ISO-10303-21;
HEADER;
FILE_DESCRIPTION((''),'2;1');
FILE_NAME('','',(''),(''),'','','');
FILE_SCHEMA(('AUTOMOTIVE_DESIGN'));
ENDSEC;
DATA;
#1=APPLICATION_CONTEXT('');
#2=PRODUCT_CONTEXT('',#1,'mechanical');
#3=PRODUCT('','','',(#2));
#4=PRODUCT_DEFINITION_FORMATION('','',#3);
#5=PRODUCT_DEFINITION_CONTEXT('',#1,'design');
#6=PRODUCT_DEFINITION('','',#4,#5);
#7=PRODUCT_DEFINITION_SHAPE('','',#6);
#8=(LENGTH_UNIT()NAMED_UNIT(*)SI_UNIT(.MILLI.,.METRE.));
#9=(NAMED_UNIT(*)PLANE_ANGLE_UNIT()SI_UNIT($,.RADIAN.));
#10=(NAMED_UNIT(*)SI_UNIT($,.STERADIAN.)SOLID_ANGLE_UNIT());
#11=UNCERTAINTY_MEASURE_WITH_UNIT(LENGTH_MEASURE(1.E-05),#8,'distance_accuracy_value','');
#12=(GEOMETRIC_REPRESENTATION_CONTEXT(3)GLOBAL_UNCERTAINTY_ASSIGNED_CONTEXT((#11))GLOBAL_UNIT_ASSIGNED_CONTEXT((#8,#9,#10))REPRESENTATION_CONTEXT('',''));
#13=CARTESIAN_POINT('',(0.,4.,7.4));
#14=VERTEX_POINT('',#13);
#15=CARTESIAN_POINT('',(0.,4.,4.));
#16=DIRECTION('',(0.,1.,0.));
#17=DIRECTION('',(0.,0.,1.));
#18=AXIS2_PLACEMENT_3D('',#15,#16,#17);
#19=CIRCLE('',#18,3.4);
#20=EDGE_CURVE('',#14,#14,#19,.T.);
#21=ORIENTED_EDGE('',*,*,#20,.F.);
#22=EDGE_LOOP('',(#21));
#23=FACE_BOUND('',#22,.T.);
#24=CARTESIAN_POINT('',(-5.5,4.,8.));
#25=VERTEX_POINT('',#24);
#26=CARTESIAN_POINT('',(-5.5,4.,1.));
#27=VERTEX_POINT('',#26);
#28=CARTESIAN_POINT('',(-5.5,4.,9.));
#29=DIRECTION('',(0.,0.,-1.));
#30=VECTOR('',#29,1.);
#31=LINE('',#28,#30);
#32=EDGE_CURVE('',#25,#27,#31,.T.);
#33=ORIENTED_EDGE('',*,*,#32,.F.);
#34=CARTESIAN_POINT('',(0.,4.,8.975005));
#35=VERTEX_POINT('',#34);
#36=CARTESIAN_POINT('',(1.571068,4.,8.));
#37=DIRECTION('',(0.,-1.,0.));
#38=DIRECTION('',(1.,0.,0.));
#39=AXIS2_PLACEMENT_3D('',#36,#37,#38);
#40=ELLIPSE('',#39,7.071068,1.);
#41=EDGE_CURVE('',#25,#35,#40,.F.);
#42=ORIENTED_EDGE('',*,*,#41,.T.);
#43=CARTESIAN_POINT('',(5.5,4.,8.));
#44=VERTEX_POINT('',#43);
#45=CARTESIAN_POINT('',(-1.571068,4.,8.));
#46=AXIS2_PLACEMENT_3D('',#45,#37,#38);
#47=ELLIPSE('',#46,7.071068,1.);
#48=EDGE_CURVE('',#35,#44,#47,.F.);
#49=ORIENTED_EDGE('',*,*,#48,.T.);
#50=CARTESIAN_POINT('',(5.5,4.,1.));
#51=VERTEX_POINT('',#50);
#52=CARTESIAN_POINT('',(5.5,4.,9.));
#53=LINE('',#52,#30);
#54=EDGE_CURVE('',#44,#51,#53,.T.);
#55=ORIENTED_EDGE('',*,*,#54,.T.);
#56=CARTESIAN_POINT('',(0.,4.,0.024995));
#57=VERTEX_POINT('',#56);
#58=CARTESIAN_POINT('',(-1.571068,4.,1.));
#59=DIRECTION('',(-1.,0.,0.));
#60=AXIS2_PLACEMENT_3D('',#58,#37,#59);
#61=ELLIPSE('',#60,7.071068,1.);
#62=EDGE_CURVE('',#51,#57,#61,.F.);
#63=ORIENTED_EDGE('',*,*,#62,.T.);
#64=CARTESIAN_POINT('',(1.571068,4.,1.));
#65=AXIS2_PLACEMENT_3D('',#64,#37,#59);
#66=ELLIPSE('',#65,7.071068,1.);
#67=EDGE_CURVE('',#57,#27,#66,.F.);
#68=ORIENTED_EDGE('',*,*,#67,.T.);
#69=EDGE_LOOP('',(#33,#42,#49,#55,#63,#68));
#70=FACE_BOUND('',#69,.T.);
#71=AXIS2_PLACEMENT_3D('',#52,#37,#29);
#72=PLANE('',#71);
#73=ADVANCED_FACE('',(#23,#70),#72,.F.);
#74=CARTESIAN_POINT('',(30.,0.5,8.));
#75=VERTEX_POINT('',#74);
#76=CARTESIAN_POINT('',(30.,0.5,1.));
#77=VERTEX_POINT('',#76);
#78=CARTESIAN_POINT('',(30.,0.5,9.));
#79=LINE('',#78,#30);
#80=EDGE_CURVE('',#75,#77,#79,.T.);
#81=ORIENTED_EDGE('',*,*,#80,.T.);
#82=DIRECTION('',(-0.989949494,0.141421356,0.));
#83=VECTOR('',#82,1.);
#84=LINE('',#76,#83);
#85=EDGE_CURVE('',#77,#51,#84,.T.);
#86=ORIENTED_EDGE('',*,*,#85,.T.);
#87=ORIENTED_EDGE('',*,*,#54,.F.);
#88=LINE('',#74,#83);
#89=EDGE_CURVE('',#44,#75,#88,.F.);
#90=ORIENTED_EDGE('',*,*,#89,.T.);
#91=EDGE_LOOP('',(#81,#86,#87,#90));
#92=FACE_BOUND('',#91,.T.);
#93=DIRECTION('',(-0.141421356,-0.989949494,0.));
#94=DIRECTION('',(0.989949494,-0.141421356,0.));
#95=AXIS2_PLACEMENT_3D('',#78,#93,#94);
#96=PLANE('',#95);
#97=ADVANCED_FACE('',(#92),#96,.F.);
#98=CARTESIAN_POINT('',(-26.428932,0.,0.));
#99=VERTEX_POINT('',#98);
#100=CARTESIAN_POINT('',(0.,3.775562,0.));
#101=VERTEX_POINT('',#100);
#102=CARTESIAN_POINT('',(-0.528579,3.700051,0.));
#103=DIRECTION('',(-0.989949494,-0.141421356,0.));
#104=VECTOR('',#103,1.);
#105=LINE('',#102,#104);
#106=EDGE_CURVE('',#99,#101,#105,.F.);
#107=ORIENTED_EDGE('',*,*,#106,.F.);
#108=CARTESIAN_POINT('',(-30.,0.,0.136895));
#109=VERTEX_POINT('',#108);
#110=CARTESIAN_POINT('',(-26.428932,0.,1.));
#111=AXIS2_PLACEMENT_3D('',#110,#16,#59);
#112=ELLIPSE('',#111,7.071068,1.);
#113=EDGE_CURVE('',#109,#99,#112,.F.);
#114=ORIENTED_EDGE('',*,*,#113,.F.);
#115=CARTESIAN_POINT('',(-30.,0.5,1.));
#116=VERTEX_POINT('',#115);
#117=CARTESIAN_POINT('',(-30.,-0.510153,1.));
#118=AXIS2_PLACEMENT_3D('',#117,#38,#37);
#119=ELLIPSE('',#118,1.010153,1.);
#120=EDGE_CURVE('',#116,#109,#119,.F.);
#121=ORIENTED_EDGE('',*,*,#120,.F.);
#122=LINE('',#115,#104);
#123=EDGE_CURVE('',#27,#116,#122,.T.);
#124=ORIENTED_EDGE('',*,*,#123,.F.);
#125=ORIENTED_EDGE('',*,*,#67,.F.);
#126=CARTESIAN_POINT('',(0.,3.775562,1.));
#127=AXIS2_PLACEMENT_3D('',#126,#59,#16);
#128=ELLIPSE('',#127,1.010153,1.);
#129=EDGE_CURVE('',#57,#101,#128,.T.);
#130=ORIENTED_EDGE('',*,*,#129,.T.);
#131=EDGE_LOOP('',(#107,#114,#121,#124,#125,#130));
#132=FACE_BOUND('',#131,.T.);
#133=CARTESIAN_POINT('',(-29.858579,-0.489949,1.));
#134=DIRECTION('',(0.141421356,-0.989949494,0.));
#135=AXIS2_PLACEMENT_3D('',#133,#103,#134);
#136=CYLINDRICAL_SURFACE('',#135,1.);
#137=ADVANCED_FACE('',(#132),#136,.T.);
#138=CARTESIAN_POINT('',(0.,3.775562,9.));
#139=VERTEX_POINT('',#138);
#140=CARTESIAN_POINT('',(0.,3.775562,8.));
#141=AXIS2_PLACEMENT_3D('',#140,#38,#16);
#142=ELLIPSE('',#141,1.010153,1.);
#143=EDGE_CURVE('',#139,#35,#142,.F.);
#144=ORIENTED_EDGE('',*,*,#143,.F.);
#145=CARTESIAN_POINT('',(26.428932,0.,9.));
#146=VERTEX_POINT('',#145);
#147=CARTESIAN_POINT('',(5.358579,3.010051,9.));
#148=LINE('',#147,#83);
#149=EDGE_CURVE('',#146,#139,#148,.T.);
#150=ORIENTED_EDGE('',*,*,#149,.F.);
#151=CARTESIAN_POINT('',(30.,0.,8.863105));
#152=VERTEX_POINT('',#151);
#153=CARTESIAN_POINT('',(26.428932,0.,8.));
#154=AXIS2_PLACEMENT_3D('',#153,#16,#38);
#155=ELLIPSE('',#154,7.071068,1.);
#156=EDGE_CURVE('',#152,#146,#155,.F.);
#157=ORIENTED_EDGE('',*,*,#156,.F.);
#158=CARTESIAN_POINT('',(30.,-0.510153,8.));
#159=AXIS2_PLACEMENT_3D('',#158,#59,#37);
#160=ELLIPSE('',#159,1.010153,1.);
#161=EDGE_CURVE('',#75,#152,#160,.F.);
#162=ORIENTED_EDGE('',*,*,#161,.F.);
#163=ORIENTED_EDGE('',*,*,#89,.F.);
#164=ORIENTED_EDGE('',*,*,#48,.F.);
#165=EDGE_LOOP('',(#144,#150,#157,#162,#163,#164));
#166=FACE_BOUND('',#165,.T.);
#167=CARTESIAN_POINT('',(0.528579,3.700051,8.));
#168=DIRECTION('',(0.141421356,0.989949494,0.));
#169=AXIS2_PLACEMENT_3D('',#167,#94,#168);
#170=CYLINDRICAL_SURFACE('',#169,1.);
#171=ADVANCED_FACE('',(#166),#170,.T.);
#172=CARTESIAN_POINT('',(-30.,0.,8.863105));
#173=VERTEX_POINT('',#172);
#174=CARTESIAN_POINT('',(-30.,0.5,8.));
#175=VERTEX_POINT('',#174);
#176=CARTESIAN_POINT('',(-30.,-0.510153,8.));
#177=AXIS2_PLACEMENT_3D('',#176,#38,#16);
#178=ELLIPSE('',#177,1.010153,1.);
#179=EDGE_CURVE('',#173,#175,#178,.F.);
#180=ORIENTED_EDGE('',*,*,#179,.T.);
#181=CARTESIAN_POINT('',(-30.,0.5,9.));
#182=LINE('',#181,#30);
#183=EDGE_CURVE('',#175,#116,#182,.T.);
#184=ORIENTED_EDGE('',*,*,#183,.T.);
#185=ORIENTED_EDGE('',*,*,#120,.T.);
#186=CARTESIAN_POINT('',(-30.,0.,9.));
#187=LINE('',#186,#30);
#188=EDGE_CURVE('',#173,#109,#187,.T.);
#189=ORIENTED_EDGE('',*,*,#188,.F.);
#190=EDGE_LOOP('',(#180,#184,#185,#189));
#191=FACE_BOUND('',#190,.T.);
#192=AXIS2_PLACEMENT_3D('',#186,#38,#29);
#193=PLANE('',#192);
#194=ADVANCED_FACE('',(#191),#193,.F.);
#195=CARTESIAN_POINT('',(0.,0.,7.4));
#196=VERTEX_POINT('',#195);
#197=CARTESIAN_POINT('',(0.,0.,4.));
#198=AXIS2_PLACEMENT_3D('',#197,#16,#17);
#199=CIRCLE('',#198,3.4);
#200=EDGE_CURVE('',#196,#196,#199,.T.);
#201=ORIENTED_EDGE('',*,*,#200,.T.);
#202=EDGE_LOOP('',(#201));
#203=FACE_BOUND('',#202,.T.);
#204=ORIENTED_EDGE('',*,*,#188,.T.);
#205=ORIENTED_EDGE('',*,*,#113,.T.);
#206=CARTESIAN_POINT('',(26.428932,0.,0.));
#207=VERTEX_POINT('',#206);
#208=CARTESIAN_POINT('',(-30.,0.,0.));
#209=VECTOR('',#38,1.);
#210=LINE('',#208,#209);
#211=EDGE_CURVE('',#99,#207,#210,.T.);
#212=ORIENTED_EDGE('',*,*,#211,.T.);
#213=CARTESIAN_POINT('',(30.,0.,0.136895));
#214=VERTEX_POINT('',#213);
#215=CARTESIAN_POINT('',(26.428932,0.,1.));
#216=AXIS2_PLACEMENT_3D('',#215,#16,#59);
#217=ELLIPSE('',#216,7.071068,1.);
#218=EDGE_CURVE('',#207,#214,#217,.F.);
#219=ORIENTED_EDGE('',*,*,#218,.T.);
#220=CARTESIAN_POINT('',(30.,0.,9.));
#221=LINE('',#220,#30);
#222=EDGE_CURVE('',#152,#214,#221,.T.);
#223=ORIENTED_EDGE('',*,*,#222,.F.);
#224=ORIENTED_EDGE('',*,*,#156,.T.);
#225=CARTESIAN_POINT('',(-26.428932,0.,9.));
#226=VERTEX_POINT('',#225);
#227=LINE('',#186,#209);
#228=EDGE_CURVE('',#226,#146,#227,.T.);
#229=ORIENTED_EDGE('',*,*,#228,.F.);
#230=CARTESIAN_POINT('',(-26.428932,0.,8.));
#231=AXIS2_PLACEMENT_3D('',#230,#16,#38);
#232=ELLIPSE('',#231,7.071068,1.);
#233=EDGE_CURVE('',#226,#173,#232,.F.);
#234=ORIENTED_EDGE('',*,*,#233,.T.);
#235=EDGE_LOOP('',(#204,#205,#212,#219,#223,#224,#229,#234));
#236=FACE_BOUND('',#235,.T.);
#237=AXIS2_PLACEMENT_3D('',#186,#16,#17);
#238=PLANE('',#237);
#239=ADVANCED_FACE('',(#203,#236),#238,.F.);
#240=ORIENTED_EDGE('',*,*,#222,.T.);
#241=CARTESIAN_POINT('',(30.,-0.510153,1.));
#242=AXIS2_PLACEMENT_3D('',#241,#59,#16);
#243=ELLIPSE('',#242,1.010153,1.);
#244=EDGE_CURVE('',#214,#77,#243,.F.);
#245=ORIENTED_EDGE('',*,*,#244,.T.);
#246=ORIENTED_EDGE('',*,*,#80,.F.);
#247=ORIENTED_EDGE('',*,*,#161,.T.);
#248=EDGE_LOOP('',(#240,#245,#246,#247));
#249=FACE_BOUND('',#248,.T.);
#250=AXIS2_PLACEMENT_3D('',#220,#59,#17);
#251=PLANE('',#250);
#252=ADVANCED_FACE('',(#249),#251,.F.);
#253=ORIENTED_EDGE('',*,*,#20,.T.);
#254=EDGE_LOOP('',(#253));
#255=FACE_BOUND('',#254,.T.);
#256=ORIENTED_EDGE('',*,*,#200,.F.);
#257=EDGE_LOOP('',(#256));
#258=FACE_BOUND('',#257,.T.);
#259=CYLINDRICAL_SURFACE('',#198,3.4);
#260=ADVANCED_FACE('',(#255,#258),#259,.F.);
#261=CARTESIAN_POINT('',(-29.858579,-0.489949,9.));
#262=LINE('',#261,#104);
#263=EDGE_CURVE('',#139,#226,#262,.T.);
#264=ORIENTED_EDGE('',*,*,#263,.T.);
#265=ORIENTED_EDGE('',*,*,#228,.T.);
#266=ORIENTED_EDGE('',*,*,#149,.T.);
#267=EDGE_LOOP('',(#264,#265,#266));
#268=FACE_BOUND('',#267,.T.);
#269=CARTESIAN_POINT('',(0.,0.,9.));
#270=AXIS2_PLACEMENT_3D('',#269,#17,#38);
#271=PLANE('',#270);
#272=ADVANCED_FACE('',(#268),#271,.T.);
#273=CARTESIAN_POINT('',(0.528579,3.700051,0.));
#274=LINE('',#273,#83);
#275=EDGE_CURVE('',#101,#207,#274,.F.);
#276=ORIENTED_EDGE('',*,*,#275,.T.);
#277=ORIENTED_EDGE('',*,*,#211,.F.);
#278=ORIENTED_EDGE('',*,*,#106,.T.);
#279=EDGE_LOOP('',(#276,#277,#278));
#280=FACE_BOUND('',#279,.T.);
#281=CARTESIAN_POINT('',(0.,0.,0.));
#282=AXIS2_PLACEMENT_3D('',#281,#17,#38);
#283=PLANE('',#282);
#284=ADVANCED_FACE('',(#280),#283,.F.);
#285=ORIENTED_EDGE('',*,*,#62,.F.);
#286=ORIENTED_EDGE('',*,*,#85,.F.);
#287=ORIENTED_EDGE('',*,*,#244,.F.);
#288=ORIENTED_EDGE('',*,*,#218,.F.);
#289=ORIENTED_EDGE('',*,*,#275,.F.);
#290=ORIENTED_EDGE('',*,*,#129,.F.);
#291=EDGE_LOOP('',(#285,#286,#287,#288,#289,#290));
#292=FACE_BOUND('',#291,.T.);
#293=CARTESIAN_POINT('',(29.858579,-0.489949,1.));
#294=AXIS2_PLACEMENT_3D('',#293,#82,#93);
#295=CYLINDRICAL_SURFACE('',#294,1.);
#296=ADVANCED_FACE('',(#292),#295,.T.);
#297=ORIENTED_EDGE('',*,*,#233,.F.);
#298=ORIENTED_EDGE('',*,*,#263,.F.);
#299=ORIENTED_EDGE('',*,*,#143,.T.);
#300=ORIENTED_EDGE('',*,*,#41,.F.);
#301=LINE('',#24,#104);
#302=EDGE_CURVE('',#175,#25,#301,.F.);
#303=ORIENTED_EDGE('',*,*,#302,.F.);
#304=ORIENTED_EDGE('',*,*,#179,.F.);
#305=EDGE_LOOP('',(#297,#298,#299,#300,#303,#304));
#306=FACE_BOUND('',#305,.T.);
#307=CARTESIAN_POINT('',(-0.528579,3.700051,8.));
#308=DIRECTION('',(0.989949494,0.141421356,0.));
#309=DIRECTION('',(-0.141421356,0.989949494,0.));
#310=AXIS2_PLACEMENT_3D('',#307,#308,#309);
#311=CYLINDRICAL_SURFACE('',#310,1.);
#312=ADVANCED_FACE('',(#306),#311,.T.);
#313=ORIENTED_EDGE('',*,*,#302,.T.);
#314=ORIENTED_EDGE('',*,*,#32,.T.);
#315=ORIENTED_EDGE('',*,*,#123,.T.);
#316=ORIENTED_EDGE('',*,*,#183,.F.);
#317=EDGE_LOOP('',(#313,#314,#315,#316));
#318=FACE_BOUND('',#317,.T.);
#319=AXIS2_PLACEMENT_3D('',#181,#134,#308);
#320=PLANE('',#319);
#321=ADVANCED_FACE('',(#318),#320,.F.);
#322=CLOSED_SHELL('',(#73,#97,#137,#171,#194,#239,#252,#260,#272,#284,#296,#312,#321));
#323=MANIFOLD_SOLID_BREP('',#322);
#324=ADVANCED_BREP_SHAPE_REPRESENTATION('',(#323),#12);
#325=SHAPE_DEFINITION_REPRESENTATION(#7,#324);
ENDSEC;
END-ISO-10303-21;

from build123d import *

# Parameters (mm, degrees)
BOSS_EXTRUDE1_DEPTH = 9
SKETCH2_R           = 3.4
CUT_EXTRUDE1_DEPTH  = 32.575306808
FILLET1_R           = 1


with BuildPart() as part:
    # Sketch1 → Boss-Extrude1 (new body)
    with BuildSketch(Plane.XY):
        Polygon((-30, 0), (30, 0), (30, 0.5), (5.5, 4), (-5.5, 4), (-30, 0.5), align=None)
    extrude(amount=BOSS_EXTRUDE1_DEPTH)

    # Sketch2 → Cut-Extrude1 (cut, through all)
    with BuildSketch(Plane(origin=(0, 4, 0), x_dir=(1, 0, 0), z_dir=(0, 1, 0))):
        with Locations(Location((0, -4, 0), (0, 0, 270))):
            Circle(SKETCH2_R)
    extrude(amount=-CUT_EXTRUDE1_DEPTH, mode=Mode.SUBTRACT)

    # Fillet1
    # the kernel refuses this fillet: 1 mm, written as the material it takes off along each edge
    with BuildSketch(Plane(origin=(0.439696962, 4.848528137, 9), x_dir=(0.1414213562373095, -0.9899494936611666, 0), z_dir=(-0.9899494936611666, -0.1414213562373095, 0)), Plane(origin=(35.939696962, -0.348528137, 9), x_dir=(-0.14142135623730948, -0.9899494936611666, 0), z_dir=(-0.9899494936611666, 0.1414213562373095, 0))) as fillet1_piece_1:
        with BuildLine():
            CenterArc((FILLET1_R, -FILLET1_R), FILLET1_R, 90, 90)
            Line((0, -FILLET1_R), (-FILLET1_R * 0.02, -FILLET1_R))
            Line((-FILLET1_R * 0.02, -FILLET1_R), (-FILLET1_R * 0.02, FILLET1_R * 0.02))
            Line((-FILLET1_R * 0.02, FILLET1_R * 0.02), (FILLET1_R, FILLET1_R * 0.02))
            Line((FILLET1_R, FILLET1_R * 0.02), (FILLET1_R, 0))
        make_face()
    extrude(amount=36.748737342, mode=Mode.SUBTRACT)
    with BuildSketch(Plane(origin=(0.439696962, 4.848528137, 0), x_dir=(0.1414213562373095, -0.9899494936611666, 0), z_dir=(-0.9899494936611666, -0.1414213562373095, 0)), Plane(origin=(35.939696962, -0.348528137, 0), x_dir=(-0.14142135623730948, -0.9899494936611666, 0), z_dir=(-0.9899494936611666, 0.1414213562373095, 0))) as fillet1_piece_2:
        with BuildLine():
            CenterArc((FILLET1_R, FILLET1_R), FILLET1_R, 180, 90)
            Line((0, FILLET1_R), (-FILLET1_R * 0.02, FILLET1_R))
            Line((-FILLET1_R * 0.02, FILLET1_R), (-FILLET1_R * 0.02, -FILLET1_R * 0.02))
            Line((-FILLET1_R * 0.02, -FILLET1_R * 0.02), (FILLET1_R, -FILLET1_R * 0.02))
            Line((FILLET1_R, -FILLET1_R * 0.02), (FILLET1_R, 0))
        make_face()
    extrude(amount=36.748737342, mode=Mode.SUBTRACT)


solid = part.part
